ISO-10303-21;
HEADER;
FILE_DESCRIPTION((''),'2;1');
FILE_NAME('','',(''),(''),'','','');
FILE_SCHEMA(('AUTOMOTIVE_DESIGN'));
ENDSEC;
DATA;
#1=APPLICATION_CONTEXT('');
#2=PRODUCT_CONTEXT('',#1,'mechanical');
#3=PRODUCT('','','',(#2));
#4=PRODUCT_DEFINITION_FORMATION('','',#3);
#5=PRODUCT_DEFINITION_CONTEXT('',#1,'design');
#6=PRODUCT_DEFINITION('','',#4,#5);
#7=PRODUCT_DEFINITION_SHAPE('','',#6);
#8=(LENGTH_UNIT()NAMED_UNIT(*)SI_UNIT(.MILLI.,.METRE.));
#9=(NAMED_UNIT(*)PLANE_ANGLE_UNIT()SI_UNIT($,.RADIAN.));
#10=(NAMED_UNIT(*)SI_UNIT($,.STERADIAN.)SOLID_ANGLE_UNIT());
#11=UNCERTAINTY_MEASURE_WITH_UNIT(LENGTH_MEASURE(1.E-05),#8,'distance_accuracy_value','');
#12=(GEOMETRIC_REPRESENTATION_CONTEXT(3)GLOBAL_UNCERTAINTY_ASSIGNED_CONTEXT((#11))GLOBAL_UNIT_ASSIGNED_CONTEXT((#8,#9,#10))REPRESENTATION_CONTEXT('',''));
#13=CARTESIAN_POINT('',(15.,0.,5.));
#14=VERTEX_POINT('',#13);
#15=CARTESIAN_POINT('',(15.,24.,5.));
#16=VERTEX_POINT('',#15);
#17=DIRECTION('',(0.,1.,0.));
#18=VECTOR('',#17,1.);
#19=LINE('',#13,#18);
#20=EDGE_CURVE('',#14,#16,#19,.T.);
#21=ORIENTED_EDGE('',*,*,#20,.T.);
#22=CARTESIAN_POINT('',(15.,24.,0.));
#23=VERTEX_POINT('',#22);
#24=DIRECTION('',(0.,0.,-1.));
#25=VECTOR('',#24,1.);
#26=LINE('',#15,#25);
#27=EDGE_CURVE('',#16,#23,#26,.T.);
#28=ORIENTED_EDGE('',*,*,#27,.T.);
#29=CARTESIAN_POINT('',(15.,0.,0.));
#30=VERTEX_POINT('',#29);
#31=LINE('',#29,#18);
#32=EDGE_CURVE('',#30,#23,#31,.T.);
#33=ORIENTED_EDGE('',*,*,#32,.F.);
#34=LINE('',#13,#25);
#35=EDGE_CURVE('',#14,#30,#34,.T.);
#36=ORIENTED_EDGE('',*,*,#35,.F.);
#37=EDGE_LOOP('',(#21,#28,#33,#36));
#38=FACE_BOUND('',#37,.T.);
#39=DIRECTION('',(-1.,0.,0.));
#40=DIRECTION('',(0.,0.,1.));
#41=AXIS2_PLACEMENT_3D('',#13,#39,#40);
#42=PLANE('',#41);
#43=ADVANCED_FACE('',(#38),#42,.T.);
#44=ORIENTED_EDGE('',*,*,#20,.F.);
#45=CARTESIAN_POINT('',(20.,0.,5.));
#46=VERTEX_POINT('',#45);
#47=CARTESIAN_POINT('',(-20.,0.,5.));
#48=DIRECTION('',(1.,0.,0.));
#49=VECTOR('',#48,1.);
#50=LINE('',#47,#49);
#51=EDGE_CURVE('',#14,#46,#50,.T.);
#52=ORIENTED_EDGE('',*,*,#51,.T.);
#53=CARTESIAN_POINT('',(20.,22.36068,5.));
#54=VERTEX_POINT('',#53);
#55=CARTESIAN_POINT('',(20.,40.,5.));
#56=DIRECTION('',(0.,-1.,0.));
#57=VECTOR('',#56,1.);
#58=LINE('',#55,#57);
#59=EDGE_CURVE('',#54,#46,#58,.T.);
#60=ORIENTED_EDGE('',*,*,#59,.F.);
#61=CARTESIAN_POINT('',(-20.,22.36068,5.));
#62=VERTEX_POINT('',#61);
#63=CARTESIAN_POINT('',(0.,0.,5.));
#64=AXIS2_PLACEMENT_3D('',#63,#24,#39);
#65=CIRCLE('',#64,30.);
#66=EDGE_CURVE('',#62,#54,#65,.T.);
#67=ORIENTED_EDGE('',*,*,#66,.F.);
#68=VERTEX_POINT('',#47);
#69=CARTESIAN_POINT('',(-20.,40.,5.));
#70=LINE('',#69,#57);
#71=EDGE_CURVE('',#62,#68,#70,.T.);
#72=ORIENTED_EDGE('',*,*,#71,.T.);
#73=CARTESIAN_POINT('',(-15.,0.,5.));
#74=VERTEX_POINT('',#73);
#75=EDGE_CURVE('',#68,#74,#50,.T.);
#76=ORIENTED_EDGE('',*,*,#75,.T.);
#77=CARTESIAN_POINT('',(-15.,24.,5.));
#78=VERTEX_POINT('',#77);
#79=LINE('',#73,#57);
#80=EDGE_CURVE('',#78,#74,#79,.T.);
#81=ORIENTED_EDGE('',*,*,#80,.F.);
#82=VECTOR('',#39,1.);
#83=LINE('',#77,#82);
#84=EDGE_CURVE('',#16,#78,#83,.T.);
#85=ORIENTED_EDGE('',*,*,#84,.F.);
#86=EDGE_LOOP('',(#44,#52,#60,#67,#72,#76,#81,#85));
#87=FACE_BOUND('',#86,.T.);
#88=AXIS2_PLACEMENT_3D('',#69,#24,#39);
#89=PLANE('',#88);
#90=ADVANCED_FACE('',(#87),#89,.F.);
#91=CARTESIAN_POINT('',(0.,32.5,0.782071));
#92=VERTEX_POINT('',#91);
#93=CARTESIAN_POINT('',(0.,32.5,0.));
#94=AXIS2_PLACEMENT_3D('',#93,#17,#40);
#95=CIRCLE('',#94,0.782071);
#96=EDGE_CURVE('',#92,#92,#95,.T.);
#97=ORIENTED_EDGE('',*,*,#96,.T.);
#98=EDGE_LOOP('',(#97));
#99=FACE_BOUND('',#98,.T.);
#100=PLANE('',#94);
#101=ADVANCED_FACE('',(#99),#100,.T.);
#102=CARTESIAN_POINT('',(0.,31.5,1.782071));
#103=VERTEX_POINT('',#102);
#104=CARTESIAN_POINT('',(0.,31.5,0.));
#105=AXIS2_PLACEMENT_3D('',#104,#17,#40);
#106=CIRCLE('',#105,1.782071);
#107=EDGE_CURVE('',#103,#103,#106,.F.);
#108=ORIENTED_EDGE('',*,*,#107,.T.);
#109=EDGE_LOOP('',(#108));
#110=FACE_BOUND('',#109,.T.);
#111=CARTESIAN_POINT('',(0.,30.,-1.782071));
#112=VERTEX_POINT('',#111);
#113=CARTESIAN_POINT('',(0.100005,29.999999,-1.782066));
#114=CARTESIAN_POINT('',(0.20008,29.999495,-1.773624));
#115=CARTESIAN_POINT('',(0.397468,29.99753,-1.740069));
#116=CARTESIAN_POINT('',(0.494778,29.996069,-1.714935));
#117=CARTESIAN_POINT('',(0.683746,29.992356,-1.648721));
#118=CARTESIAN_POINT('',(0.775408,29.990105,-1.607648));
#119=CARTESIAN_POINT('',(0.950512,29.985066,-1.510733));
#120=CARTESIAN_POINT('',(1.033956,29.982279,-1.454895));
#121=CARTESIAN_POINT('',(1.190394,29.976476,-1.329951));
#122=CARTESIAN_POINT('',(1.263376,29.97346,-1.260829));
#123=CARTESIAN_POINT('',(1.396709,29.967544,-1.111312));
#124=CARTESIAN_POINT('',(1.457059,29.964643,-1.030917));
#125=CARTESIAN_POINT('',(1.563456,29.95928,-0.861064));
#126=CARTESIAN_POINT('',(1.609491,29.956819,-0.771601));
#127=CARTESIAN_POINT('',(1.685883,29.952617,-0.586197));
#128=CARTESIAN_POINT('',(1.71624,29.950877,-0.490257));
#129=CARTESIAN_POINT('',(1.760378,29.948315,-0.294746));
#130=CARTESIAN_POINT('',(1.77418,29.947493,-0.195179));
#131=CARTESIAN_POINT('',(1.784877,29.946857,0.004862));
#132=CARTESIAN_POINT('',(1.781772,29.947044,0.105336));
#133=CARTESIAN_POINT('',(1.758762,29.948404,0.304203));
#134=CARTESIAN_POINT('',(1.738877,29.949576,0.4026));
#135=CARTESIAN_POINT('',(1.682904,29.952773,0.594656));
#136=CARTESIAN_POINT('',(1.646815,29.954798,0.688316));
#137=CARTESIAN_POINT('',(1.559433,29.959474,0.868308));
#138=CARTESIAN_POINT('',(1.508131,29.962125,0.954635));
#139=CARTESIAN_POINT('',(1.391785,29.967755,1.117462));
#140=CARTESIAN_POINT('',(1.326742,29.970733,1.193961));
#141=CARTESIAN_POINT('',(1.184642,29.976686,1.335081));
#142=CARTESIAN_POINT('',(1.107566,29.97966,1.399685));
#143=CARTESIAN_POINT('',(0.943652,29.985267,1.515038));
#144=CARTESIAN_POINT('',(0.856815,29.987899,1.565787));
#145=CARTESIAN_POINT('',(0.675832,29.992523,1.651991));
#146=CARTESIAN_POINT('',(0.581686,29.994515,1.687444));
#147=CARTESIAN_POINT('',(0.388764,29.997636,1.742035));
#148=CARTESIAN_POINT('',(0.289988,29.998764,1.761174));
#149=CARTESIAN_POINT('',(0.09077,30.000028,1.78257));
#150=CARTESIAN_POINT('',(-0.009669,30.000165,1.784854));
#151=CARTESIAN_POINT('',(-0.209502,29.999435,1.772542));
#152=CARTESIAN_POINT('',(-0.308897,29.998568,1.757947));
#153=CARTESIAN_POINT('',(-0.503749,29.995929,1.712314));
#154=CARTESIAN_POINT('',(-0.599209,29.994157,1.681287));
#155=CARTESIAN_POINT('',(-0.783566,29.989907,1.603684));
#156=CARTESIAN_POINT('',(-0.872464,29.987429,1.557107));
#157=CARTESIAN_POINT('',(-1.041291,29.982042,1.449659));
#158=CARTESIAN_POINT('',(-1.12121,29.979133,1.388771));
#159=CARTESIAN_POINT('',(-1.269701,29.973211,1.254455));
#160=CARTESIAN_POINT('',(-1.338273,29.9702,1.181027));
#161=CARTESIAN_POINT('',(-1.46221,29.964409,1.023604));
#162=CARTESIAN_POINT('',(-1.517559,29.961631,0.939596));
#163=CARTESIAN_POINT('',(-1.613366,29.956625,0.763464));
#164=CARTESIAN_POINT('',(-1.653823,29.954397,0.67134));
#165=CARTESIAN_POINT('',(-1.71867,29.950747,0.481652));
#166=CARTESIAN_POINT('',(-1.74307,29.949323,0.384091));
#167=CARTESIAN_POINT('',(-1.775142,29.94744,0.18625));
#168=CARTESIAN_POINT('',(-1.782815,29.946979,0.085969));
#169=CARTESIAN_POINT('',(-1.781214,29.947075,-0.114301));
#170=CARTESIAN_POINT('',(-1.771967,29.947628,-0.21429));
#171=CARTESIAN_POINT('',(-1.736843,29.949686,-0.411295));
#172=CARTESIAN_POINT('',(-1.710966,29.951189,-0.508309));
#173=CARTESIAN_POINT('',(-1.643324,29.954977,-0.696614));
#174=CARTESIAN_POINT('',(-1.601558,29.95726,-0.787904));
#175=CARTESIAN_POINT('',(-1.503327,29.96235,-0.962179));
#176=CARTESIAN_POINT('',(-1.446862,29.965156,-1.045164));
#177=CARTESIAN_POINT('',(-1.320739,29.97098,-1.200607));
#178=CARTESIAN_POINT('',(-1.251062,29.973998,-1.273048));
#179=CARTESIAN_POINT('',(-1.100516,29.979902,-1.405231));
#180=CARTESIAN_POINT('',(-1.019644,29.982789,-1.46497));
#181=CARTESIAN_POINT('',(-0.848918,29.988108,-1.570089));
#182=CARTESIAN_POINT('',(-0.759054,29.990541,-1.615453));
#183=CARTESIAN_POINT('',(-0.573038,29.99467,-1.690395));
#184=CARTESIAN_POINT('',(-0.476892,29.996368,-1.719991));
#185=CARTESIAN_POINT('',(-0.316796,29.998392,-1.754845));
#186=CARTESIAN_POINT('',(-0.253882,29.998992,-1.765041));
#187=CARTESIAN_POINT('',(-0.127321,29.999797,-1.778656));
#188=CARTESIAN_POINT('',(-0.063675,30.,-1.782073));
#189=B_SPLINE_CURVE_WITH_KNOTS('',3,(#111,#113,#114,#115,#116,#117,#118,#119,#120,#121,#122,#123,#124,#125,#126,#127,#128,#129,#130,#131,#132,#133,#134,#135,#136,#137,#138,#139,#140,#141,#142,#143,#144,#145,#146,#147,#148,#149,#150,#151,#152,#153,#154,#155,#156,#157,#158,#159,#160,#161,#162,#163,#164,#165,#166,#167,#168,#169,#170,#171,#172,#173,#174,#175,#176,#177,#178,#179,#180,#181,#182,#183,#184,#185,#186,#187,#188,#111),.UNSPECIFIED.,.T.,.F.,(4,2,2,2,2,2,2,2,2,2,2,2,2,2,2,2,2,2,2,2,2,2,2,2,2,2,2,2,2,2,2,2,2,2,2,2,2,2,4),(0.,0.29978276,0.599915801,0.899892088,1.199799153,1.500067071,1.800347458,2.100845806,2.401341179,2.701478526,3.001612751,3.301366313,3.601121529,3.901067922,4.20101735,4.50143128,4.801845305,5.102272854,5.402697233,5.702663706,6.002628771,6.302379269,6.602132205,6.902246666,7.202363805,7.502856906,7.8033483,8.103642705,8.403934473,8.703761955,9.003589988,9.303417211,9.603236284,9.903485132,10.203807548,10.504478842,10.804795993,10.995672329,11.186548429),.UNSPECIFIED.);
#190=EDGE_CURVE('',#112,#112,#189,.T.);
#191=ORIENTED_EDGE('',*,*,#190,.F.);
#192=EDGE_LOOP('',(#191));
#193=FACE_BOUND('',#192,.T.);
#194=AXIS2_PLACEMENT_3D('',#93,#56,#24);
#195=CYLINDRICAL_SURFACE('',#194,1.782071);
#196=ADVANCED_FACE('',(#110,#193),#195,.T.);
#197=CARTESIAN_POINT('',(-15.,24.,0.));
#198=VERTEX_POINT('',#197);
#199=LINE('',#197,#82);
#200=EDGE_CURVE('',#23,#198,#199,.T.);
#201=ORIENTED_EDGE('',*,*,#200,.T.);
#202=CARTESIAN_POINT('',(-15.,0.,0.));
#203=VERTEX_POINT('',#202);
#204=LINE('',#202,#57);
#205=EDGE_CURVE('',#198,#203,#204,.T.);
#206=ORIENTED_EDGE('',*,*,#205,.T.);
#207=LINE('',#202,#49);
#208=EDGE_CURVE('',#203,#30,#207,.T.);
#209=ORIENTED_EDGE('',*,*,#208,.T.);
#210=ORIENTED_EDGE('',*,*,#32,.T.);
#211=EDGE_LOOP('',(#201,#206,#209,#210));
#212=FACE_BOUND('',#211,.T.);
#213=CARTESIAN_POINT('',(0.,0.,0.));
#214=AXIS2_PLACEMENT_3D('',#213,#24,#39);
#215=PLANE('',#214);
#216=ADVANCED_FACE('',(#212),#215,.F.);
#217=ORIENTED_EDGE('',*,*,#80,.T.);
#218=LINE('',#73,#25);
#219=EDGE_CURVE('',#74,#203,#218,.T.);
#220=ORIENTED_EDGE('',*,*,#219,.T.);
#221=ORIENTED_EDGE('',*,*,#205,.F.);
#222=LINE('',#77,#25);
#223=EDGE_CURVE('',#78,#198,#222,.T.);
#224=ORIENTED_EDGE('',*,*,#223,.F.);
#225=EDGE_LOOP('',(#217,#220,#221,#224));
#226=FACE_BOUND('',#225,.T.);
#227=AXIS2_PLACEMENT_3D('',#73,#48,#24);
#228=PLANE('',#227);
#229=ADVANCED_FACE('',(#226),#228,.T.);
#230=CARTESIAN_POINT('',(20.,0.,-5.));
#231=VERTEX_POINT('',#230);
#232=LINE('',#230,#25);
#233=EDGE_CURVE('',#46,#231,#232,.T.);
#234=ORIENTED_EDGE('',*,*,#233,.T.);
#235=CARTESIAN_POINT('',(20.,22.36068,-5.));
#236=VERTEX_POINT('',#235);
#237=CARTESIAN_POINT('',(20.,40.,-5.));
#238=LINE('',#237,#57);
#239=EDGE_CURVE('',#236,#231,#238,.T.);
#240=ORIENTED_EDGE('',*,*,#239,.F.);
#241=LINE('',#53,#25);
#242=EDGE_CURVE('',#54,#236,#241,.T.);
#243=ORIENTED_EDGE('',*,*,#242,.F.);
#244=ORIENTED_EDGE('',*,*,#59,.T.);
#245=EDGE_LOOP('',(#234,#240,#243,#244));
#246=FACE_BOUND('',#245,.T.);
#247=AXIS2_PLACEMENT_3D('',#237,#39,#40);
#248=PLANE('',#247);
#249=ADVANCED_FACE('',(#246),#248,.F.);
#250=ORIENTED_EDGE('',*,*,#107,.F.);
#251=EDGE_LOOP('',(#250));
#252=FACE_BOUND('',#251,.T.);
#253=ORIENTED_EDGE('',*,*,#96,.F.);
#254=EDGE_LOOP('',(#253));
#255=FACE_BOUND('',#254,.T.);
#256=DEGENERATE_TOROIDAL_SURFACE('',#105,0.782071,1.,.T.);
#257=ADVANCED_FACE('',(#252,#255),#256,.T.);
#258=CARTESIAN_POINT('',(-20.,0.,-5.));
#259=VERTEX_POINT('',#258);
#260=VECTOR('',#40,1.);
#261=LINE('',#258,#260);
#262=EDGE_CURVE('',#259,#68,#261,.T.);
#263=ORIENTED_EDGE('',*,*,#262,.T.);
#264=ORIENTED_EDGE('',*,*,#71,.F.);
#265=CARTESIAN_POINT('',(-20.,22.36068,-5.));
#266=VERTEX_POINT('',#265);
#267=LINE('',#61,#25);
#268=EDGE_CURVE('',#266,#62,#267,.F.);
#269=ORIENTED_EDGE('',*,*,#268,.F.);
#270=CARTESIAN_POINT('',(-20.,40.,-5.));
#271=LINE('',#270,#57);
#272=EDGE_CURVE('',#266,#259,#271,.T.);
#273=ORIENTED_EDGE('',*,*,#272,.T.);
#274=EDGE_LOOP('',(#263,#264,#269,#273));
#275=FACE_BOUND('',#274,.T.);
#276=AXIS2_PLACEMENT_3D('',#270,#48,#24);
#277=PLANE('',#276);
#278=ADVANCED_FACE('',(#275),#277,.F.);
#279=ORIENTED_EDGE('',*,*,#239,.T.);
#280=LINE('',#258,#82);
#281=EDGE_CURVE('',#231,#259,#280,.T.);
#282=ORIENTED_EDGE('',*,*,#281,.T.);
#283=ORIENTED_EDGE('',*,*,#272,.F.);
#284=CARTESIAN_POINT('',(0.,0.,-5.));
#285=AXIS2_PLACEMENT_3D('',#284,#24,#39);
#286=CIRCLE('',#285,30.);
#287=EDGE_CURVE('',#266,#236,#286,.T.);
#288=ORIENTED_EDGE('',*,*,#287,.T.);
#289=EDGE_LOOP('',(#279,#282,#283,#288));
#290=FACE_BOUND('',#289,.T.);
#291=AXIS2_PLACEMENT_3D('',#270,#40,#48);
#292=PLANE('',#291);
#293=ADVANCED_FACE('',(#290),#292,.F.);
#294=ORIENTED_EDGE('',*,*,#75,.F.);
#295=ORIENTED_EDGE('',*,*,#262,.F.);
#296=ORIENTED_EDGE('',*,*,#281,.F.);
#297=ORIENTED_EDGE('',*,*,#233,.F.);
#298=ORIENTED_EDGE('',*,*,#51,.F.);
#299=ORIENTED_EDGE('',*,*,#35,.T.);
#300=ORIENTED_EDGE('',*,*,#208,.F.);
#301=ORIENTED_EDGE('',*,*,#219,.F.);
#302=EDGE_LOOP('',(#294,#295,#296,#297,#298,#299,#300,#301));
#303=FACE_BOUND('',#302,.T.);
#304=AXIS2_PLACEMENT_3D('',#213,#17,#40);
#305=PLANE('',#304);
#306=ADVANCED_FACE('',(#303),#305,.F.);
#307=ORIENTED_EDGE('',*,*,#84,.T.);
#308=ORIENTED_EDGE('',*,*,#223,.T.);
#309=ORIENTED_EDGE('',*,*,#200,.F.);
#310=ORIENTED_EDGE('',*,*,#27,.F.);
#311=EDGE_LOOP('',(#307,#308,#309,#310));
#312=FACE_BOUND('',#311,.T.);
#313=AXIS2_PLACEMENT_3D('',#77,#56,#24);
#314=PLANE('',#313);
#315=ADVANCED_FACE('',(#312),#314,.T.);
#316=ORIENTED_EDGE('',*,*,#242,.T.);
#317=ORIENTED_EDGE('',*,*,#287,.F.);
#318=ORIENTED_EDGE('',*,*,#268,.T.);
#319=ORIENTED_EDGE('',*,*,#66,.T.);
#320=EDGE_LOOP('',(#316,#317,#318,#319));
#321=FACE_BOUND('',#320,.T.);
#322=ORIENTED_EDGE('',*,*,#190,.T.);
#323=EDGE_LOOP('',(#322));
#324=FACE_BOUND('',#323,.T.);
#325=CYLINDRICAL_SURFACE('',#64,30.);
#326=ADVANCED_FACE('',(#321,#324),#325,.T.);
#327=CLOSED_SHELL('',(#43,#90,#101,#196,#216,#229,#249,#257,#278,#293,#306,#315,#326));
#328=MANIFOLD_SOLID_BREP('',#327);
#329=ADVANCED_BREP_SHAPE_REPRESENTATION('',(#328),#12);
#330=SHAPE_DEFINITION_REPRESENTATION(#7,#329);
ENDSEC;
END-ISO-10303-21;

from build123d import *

# Parameters (mm, degrees)
SKETCH2_W           = 40
SKETCH2_H           = 10
BOSS_EXTRUDE1_DEPTH = 40
CUT_EXTRUDE1_START  = -10
CUT_EXTRUDE1_DEPTH  = 10
SKETCH7_R           = 1.782070526
BOSS_EXTRUDE2_DEPTH = 32.5
FILLET2_R           = 1
SKETCH8_W           = 30
SKETCH8_H           = 24
CUT_EXTRUDE2_DEPTH  = 5


# Read off the part's stored shape, not the designer's step: Cut-Extrude1
with BuildPart() as part:
    # Sketch2 → Boss-Extrude1 (new body)
    with BuildSketch(Plane(origin=(0, 0, 0), x_dir=(1, 0, 0), z_dir=(0, 1, 0))):
        Rectangle(SKETCH2_W, SKETCH2_H)
    extrude(amount=BOSS_EXTRUDE1_DEPTH)

    # Cut-Extrude1 outline → Cut-Extrude1 (cut)
    with BuildSketch(Plane(origin=(0, 0, -5), x_dir=(-1, 0, 0), z_dir=(0, 0, -1)).offset(CUT_EXTRUDE1_START)):
        with BuildLine():
            ThreePointArc((-20, 22.360679775), (0, 30), (20, 22.360679775))
            Line((20, 22.360679775), (20, 40))
            Line((20, 40), (-20, 40))
            Line((-20, 40), (-20, 22.360679775))
        make_face()
    extrude(amount=CUT_EXTRUDE1_DEPTH, mode=Mode.SUBTRACT)

    # Sketch7 → Boss-Extrude2 (add)
    with BuildSketch(Plane(origin=(0, 0, 0), x_dir=(1, 0, 0), z_dir=(0, 1, 0))):
        with Locations(Location((0, 0, 0), (0, 0, 90))):
            Circle(SKETCH7_R)
    extrude(amount=BOSS_EXTRUDE2_DEPTH)

    # Fillet2
    fillet2_edges = [part.edges().sort_by_distance(p)[0] for p in [
        (0, 32.5, 1.782070526),
    ]]
    fillet(fillet2_edges, radius=FILLET2_R)

    # Sketch8 → Cut-Extrude2 (cut)
    with BuildSketch(Plane.XY):
        with Locations((0, 12)):
            Rectangle(SKETCH8_W, SKETCH8_H)
    extrude(amount=CUT_EXTRUDE2_DEPTH, mode=Mode.SUBTRACT)


solid = part.part
